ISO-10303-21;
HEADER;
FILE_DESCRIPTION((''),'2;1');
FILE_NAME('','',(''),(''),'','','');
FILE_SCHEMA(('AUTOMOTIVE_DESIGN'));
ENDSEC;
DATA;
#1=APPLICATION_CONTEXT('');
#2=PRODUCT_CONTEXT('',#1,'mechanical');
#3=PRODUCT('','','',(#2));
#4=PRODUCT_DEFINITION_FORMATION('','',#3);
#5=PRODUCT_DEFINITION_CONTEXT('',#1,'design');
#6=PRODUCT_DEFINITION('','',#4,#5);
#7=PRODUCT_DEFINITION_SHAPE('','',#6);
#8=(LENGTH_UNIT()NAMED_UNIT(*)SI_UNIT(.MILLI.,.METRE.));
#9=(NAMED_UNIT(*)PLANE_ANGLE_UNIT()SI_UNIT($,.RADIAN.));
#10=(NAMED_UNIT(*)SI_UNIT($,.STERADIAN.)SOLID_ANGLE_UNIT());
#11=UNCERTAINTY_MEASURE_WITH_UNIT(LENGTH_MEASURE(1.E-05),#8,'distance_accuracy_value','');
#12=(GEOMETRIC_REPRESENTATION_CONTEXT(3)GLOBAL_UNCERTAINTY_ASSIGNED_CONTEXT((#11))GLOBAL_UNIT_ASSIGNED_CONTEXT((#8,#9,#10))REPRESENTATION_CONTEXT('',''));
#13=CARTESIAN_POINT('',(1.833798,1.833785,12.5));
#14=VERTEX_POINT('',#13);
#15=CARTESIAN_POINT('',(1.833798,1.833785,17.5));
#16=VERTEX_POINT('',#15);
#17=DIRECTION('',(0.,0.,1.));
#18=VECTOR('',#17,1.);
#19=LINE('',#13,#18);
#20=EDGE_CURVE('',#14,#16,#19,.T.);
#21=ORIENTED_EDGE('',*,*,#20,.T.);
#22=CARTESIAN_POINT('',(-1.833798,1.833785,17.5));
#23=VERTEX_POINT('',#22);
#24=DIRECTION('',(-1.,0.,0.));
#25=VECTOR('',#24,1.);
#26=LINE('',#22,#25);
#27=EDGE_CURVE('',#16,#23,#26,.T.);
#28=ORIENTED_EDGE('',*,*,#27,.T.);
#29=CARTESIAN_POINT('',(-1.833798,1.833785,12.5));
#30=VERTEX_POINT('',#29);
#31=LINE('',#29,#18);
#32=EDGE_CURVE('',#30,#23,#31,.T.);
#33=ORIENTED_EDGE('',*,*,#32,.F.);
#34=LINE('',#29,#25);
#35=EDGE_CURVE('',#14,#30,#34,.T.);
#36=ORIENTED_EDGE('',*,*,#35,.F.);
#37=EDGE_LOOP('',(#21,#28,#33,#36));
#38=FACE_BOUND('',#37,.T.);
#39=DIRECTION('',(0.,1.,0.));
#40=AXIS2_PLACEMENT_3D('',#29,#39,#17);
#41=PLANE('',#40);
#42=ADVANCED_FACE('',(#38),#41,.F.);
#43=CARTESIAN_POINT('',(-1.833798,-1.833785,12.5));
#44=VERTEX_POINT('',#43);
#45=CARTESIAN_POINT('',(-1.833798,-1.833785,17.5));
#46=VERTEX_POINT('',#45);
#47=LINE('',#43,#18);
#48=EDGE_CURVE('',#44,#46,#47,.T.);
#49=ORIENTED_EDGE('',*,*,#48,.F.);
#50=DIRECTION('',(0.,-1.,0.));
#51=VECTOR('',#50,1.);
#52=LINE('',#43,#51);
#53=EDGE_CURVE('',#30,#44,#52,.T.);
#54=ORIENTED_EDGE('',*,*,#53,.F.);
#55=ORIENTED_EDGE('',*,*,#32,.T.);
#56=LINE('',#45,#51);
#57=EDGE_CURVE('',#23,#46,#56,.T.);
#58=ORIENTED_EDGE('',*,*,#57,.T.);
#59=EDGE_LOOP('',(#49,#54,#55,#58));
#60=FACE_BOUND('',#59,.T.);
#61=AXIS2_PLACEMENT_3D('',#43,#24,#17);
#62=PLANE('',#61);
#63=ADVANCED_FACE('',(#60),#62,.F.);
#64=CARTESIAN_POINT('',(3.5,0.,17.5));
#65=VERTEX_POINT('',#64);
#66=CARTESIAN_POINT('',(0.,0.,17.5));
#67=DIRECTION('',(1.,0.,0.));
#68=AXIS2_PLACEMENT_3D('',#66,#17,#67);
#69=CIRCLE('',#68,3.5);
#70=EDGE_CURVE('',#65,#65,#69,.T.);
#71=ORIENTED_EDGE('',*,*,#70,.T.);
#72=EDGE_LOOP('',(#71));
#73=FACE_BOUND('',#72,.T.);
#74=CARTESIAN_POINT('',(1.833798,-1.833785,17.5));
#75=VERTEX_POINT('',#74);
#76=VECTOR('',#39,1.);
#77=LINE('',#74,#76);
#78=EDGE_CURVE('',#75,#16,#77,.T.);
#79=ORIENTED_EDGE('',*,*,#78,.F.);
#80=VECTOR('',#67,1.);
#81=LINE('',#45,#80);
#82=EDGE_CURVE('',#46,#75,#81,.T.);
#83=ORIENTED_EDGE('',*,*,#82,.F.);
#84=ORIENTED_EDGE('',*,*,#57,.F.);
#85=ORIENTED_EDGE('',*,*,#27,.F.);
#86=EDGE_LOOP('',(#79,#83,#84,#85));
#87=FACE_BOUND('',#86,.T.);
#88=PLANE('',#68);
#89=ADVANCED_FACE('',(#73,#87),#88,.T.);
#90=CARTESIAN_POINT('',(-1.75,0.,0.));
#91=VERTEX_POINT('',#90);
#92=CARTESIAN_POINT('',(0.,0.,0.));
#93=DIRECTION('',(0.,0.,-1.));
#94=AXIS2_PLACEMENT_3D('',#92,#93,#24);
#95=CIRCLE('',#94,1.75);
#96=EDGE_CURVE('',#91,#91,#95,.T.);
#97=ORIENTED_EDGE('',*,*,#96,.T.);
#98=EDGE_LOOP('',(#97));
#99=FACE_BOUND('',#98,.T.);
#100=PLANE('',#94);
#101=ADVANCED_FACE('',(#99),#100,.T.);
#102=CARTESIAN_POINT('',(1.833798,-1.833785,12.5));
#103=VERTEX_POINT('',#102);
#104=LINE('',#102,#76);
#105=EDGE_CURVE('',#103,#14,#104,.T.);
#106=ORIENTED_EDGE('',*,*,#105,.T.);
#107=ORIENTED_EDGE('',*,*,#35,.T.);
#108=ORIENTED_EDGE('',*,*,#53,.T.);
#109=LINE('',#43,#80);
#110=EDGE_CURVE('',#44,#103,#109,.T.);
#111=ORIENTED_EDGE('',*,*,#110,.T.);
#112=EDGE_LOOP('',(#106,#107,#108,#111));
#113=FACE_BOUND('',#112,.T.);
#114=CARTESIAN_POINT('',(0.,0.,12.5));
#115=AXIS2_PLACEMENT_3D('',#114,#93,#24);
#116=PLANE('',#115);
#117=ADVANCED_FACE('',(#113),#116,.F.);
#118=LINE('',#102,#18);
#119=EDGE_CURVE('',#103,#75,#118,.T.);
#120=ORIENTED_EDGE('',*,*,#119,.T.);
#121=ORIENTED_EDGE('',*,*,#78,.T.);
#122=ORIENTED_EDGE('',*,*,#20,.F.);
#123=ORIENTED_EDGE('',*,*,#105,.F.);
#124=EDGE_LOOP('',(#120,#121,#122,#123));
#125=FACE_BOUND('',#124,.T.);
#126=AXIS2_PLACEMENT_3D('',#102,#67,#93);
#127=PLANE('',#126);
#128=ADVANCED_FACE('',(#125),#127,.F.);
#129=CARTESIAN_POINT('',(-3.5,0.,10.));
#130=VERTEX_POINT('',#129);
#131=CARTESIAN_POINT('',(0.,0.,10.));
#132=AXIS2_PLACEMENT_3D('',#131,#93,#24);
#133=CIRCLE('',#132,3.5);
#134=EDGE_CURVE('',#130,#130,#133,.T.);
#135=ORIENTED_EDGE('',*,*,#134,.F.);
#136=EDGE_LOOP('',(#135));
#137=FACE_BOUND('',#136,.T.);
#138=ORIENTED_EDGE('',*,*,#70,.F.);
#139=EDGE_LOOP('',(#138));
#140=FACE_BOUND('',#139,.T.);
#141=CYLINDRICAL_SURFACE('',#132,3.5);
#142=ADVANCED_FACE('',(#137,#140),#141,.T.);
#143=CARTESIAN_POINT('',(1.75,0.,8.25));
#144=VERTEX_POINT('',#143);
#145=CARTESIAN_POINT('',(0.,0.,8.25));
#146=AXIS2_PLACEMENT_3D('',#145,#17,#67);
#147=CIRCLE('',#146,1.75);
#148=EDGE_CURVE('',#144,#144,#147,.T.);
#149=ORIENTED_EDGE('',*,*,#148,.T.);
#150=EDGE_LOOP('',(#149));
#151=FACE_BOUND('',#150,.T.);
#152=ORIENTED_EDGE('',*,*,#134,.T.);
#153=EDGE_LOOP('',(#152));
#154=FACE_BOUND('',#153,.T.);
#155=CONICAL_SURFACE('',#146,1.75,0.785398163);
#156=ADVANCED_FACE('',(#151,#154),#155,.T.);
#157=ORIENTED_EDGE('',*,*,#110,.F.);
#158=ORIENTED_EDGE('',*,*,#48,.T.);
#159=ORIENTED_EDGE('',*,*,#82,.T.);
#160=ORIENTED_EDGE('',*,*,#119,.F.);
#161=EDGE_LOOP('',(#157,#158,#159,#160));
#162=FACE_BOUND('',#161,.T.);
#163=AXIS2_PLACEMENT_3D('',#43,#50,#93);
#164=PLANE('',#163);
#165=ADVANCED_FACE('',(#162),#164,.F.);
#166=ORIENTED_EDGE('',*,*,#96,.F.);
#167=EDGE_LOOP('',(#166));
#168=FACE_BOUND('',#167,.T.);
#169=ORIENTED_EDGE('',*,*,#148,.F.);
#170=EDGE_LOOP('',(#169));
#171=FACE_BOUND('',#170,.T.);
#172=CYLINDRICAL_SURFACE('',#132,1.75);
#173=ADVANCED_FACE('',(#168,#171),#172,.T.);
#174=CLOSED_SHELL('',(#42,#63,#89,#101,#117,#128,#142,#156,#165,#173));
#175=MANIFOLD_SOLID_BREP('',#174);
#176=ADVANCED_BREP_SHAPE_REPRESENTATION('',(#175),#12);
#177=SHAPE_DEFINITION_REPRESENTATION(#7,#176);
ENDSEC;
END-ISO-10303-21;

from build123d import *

# Parameters (mm, degrees)
BOSS_EXTRUDE1_DEPTH    = 10
SKETCH2_R              = 3.5
BOSS_EXTRUDE2_DEPTH    = 7.5
SKETCH3_W              = 3.66759605
SKETCH3_H              = 3.66756905
CUT_EXTRUDE1_DEPTH     = 5
BOSS_EXTRUDE3_REACH    = 20.187
CUT_EXTRUDE4_OUTLINE_W = 1.75
CUT_EXTRUDE4_OUTLINE_H = 10


# Read off the part's stored shape, not the designer's step: Cut-Extrude4
with BuildPart() as part:
    # Sketch1 → Boss-Extrude1 (new body)
    with BuildSketch(Plane.XY):
        with BuildLine():
            ThreePointArc((-2.449489743, 2.5), (0, -3.5), (2.449489743, 2.5))
            ThreePointArc((2.449489743, 2.5), (0, 3.5), (-2.449489743, 2.5))
        make_face()
        with BuildLine():
            Line((-2, 1.5), (2, 1.5))
            ThreePointArc((2, 1.5), (0, -2.5), (-2, 1.5))
        make_face(mode=Mode.SUBTRACT)
    extrude(amount=BOSS_EXTRUDE1_DEPTH)

    # Sketch2 → Boss-Extrude2 (add)
    with BuildSketch(Plane.XY.offset(10)):
        Circle(SKETCH2_R)
    extrude(amount=BOSS_EXTRUDE2_DEPTH)

    # Sketch3 → Cut-Extrude1 (cut)
    with BuildSketch(Plane.XY.offset(17.5)):
        Rectangle(SKETCH3_W, SKETCH3_H)
    extrude(amount=-CUT_EXTRUDE1_DEPTH, mode=Mode.SUBTRACT)

    # Sketch1<2> → Boss-Extrude3 (add, up to next)
    with BuildSketch(Plane.XY, mode=Mode.PRIVATE) as boss_extrude3_sk1:
        with BuildLine():
            Line((-2, 1.5), (2, 1.5))
            ThreePointArc((2, 1.5), (0, -2.5), (-2, 1.5))
        make_face()
    boss_extrude3_tool1 = extrude(boss_extrude3_sk1.sketch, amount=BOSS_EXTRUDE3_REACH, mode=Mode.PRIVATE) - part.part
    add(boss_extrude3_tool1.solids().sort_by_distance((0, -0.316718, 0))[0])

    # Cut-Extrude4 outline → Cut-Extrude4 (revolve, cut)
    with BuildSketch(Plane.XZ):
        with Locations((2.625, 5)):
            Rectangle(CUT_EXTRUDE4_OUTLINE_W, CUT_EXTRUDE4_OUTLINE_H)
    revolve(axis=Axis((0, 0, 0), (0, 0, 1)), mode=Mode.SUBTRACT)

    # Sketch6 → Revolve1 (revolve)
    with BuildSketch(Plane(origin=(0, 0, 0), x_dir=(1, 0, 0), z_dir=(0, 1, 0))):
        Polygon((-3.5, -10), (-1.75, -10), (-1.75, -8.25), align=None)
    revolve(axis=Axis((0, 0, 10), (0, 0, -1)))


solid = part.part
